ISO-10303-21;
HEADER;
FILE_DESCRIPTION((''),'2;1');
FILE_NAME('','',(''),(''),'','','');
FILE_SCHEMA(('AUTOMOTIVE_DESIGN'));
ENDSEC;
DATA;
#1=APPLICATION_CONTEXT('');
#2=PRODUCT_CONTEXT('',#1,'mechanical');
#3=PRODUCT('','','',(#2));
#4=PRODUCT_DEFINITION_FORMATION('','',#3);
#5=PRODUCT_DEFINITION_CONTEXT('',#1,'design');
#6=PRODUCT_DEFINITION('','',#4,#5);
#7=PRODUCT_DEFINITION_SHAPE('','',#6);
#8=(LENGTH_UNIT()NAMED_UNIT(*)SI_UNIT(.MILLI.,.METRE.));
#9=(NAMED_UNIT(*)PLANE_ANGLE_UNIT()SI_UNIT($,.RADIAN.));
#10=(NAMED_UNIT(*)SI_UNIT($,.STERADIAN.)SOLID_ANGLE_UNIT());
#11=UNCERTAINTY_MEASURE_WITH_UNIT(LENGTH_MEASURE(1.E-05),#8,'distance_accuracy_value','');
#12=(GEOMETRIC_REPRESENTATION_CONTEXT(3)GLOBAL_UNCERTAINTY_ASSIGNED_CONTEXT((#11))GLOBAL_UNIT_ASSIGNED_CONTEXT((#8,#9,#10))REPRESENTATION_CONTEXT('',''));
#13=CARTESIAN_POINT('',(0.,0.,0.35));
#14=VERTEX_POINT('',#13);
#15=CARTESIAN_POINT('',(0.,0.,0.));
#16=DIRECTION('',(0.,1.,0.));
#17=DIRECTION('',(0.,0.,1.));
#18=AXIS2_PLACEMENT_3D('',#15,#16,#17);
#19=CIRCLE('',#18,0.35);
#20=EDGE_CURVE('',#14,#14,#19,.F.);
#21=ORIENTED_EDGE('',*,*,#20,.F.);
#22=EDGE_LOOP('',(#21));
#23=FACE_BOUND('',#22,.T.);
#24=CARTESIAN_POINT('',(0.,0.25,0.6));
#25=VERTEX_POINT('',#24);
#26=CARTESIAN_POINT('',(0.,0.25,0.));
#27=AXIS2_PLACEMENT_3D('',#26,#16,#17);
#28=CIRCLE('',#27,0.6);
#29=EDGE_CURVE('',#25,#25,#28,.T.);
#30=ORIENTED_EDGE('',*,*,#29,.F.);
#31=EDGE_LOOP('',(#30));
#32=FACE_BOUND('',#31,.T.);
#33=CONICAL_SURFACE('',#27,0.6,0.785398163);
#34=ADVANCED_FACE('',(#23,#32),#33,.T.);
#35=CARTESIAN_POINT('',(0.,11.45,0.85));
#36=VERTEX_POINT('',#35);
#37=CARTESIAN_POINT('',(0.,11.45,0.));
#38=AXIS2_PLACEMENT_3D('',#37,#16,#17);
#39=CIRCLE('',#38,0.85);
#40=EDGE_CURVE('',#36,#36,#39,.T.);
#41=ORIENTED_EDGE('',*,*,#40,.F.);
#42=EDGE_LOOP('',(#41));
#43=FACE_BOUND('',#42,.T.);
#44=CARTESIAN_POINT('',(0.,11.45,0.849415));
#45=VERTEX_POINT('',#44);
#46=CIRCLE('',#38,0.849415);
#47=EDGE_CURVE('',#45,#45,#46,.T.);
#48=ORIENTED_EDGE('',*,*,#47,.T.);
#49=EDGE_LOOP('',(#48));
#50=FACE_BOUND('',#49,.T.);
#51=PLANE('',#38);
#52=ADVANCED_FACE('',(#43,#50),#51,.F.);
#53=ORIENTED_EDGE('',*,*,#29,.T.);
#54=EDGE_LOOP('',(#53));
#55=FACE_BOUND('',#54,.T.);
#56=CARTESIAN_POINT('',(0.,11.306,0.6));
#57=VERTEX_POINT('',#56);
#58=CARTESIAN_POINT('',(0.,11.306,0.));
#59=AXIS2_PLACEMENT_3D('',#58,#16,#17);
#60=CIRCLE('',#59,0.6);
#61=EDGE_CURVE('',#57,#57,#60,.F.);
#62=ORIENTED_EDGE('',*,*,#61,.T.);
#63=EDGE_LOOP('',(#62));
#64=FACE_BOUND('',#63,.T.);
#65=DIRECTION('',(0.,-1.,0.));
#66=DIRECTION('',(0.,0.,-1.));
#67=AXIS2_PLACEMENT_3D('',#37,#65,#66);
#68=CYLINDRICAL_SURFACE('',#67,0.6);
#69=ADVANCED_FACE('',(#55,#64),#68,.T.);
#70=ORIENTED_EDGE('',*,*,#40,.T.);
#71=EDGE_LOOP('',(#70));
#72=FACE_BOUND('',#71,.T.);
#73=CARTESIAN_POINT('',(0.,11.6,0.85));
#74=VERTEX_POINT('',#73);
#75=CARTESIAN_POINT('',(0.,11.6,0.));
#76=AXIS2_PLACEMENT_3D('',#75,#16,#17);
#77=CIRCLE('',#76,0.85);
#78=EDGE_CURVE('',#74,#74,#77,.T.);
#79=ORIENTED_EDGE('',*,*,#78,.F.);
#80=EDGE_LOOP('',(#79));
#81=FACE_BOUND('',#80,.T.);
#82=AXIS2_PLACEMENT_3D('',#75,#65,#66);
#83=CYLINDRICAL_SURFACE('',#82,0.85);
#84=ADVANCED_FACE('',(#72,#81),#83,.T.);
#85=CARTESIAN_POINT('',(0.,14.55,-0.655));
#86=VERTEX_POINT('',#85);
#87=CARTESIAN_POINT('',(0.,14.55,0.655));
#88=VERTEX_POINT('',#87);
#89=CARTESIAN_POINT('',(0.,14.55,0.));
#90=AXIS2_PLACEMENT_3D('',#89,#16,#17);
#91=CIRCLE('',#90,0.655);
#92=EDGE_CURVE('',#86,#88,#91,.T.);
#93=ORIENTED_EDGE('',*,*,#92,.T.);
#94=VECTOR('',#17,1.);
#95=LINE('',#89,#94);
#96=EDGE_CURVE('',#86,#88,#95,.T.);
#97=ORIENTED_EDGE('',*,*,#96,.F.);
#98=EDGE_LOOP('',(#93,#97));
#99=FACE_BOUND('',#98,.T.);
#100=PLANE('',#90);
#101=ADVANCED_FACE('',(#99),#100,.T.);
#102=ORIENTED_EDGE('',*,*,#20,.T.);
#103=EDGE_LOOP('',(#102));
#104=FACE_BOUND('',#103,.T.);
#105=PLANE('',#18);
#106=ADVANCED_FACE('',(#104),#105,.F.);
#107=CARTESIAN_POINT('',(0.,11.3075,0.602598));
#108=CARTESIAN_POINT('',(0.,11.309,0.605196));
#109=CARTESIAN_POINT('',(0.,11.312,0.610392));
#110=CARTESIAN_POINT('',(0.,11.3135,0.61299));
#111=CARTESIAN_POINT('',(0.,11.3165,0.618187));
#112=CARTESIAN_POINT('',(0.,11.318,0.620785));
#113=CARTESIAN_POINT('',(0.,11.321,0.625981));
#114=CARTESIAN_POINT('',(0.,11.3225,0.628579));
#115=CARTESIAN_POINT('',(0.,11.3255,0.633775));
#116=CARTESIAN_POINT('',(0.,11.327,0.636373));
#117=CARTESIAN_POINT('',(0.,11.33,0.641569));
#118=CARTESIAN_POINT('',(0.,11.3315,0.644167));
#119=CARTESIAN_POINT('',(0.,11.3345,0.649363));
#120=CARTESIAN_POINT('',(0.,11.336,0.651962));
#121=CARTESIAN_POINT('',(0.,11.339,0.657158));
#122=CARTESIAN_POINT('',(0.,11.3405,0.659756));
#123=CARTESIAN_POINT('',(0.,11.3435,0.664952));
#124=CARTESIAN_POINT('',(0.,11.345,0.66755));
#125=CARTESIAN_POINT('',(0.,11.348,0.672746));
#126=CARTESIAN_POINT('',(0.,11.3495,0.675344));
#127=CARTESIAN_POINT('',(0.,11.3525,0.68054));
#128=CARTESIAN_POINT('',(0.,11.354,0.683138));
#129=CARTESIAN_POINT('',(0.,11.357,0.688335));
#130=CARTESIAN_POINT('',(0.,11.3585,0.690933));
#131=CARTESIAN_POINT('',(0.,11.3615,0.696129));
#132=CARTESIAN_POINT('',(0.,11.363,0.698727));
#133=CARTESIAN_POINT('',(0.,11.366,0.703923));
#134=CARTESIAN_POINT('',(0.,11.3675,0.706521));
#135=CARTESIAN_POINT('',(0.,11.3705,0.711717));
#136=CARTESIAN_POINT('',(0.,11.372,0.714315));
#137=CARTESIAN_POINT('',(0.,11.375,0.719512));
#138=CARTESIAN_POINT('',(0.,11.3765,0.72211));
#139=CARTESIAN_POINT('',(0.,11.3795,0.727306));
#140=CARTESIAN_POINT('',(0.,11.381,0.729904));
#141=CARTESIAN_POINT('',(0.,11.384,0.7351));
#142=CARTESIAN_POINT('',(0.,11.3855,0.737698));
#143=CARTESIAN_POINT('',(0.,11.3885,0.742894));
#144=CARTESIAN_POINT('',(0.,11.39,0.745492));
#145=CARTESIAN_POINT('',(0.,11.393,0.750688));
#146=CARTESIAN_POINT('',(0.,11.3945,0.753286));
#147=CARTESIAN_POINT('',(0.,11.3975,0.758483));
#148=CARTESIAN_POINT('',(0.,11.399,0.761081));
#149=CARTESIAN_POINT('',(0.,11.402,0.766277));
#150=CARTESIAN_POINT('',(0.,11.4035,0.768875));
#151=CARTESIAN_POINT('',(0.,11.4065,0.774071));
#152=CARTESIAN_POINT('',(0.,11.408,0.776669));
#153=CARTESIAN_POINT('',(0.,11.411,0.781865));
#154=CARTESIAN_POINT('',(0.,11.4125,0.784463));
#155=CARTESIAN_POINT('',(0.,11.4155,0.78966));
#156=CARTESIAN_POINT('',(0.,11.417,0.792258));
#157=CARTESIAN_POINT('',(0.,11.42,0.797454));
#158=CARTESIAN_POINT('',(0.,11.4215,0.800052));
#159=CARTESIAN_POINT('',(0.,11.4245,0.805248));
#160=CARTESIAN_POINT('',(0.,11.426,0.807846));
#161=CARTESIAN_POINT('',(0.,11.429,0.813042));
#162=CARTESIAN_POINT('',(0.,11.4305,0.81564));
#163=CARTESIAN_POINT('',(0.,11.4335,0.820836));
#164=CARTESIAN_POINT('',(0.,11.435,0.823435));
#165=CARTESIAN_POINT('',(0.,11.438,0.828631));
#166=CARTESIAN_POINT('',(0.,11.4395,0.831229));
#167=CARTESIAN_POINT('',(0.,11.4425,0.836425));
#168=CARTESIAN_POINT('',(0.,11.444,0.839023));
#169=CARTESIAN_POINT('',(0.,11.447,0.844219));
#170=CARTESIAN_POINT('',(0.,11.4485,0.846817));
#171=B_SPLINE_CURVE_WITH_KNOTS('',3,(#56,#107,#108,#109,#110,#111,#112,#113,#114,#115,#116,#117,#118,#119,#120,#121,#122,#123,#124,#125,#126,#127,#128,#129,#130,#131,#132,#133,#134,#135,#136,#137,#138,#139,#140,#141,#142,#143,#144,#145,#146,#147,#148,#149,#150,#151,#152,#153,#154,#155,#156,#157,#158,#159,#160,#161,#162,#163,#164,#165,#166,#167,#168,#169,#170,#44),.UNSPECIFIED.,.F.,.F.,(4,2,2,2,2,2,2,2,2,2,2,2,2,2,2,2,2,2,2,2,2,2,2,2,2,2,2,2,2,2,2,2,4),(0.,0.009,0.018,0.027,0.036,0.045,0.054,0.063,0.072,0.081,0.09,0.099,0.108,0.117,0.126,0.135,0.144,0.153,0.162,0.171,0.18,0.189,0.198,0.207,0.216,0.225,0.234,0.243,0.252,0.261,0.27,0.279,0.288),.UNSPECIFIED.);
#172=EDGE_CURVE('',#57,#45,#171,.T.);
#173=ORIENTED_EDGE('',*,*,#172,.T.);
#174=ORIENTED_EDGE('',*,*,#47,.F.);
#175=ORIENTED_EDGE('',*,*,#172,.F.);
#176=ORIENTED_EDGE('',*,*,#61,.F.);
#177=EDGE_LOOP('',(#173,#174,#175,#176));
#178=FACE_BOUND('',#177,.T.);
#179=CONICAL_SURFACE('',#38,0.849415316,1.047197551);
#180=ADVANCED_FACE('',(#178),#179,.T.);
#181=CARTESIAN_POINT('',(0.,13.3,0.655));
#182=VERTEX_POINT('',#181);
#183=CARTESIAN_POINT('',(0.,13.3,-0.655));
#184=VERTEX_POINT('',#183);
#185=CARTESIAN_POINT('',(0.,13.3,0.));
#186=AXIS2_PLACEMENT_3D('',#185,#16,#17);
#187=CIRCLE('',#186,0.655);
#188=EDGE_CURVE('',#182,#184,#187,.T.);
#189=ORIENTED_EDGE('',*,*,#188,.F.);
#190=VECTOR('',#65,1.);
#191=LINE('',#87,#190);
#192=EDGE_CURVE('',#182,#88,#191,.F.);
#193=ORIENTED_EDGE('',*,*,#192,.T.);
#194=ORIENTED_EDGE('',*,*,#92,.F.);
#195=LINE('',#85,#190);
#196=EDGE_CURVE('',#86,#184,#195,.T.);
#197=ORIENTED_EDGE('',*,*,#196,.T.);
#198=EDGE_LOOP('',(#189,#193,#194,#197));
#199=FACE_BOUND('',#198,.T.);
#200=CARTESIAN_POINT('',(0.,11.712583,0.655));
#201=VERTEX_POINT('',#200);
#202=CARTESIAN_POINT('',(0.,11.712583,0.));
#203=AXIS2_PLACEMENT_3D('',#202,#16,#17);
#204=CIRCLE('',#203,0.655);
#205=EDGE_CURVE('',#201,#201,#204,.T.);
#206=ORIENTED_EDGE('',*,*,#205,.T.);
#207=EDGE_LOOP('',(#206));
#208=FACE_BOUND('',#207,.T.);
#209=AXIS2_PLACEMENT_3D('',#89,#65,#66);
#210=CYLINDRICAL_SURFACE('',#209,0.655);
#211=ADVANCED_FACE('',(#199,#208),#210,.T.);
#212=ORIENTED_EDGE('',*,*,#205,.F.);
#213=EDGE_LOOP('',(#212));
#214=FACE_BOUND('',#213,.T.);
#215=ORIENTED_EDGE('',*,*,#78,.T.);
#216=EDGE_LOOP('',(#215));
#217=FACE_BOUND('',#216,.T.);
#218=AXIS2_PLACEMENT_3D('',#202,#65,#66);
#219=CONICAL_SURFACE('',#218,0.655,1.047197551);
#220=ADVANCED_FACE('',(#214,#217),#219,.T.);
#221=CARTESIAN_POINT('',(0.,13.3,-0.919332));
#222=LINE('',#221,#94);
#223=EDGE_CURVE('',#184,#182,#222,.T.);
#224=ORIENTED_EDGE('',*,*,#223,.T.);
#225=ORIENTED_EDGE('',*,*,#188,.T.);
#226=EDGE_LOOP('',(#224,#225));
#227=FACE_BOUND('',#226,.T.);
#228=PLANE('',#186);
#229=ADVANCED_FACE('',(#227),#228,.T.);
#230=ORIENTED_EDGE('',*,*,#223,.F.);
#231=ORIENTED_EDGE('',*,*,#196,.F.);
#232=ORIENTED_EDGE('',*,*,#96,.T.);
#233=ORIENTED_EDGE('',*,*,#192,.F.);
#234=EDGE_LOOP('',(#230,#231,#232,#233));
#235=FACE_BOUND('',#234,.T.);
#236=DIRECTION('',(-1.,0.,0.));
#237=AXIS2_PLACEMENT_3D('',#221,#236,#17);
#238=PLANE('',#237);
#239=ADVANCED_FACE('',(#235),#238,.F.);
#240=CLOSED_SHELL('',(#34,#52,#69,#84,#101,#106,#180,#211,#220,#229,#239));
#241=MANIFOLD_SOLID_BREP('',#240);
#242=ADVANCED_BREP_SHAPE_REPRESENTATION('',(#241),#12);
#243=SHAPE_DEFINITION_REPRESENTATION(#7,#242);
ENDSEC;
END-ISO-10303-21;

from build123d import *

# Parameters (mm, degrees)
SKETCH1_R           = 0.6
BOSS_EXTRUDE1_DEPTH = 11.45
CHAMFER1_SIZE       = 0.25
SKETCH3_R           = 0.85
BOSS_EXTRUDE2_DEPTH = 0.15
SKETCH4_R           = 0.655
BOSS_EXTRUDE3_DEPTH = 2.95
SKETCH5_W           = 0.965055555
SKETCH5_H           = 1.860066756
CUT_EXTRUDE1_DEPTH  = 1.25
CHAMFER2_SIZE       = 0.195
CHAMFER2_SIZE_2     = 0.112583302
CHAMFER3_SIZE       = 0.144
CHAMFER3_SIZE2      = 0.249415316


with BuildPart() as part:
    # Sketch1 → Boss-Extrude1 (new body)
    with BuildSketch(Plane(origin=(0, 0, 0), x_dir=(1, 0, 0), z_dir=(0, 1, 0))):
        with Locations(Location((0, 0, 0), (0, 0, 270))):
            Circle(SKETCH1_R)
    extrude(amount=BOSS_EXTRUDE1_DEPTH)

    # Chamfer1
    chamfer1_edges = [part.edges().sort_by_distance(p)[0] for p in [
        (0, 0, -0.6),
    ]]
    chamfer(chamfer1_edges, length=CHAMFER1_SIZE)

    # Sketch3 → Boss-Extrude2 (add)
    with BuildSketch(Plane(origin=(0, 11.45, 0), x_dir=(1, 0, 0), z_dir=(0, 1, 0))):
        with Locations(Location((0, 0, 0), (0, 0, 270))):
            Circle(SKETCH3_R)
    extrude(amount=BOSS_EXTRUDE2_DEPTH)

    # Sketch4 → Boss-Extrude3 (add)
    with BuildSketch(Plane(origin=(0, 11.6, 0), x_dir=(1, 0, 0), z_dir=(0, 1, 0))):
        with Locations(Location((0, 0, 0), (0, 0, 270))):
            Circle(SKETCH4_R)
    extrude(amount=BOSS_EXTRUDE3_DEPTH)

    # Sketch5 → Cut-Extrude1 (cut)
    with BuildSketch(Plane(origin=(0, 14.55, 0), x_dir=(1, 0, 0), z_dir=(0, 1, 0))):
        with Locations((0.482527778, -0.010701221)):
            Rectangle(SKETCH5_W, SKETCH5_H)
    extrude(amount=-CUT_EXTRUDE1_DEPTH, mode=Mode.SUBTRACT)

    # Chamfer2
    # the kernel refuses this chamfer: 0.195, 0.112583302 mm, written as the material it adds along each edge
    with BuildSketch(Plane(origin=(0, 11.6, 0), x_dir=(0, 0, 1), z_dir=(-1, 0, 0))) as chamfer2_piece_1_section:
        Polygon((0.655 + CHAMFER2_SIZE, 0), (0.655, CHAMFER2_SIZE_2 * 1.00000000437), (0.655, 0), align=None)
    chamfer2_piece_1 = revolve(axis=Axis((0, 11.6, 0), (0, 1, 0)), mode=Mode.PRIVATE)
    chamfer2_piece_1 = chamfer2_piece_1 & Plane(origin=(0, 11.654924412, 0), x_dir=(0, 0, 1), z_dir=(0, -1, 0)) * Cylinder(0.85, 4, mode=Mode.PRIVATE)
    add(chamfer2_piece_1)

    # Chamfer3
    chamfer3_edges = [part.edges().sort_by_distance(p)[0] for p in [
        (0, 11.45, -0.6),
    ]]
    chamfer3_side = [part.faces().sort_by_distance(p)[0] for p in [
        (0, 5.85, -0.6),
    ]]
    chamfer(chamfer3_edges, length=CHAMFER3_SIZE, length2=CHAMFER3_SIZE2, reference=chamfer3_side[0])


solid = part.part
